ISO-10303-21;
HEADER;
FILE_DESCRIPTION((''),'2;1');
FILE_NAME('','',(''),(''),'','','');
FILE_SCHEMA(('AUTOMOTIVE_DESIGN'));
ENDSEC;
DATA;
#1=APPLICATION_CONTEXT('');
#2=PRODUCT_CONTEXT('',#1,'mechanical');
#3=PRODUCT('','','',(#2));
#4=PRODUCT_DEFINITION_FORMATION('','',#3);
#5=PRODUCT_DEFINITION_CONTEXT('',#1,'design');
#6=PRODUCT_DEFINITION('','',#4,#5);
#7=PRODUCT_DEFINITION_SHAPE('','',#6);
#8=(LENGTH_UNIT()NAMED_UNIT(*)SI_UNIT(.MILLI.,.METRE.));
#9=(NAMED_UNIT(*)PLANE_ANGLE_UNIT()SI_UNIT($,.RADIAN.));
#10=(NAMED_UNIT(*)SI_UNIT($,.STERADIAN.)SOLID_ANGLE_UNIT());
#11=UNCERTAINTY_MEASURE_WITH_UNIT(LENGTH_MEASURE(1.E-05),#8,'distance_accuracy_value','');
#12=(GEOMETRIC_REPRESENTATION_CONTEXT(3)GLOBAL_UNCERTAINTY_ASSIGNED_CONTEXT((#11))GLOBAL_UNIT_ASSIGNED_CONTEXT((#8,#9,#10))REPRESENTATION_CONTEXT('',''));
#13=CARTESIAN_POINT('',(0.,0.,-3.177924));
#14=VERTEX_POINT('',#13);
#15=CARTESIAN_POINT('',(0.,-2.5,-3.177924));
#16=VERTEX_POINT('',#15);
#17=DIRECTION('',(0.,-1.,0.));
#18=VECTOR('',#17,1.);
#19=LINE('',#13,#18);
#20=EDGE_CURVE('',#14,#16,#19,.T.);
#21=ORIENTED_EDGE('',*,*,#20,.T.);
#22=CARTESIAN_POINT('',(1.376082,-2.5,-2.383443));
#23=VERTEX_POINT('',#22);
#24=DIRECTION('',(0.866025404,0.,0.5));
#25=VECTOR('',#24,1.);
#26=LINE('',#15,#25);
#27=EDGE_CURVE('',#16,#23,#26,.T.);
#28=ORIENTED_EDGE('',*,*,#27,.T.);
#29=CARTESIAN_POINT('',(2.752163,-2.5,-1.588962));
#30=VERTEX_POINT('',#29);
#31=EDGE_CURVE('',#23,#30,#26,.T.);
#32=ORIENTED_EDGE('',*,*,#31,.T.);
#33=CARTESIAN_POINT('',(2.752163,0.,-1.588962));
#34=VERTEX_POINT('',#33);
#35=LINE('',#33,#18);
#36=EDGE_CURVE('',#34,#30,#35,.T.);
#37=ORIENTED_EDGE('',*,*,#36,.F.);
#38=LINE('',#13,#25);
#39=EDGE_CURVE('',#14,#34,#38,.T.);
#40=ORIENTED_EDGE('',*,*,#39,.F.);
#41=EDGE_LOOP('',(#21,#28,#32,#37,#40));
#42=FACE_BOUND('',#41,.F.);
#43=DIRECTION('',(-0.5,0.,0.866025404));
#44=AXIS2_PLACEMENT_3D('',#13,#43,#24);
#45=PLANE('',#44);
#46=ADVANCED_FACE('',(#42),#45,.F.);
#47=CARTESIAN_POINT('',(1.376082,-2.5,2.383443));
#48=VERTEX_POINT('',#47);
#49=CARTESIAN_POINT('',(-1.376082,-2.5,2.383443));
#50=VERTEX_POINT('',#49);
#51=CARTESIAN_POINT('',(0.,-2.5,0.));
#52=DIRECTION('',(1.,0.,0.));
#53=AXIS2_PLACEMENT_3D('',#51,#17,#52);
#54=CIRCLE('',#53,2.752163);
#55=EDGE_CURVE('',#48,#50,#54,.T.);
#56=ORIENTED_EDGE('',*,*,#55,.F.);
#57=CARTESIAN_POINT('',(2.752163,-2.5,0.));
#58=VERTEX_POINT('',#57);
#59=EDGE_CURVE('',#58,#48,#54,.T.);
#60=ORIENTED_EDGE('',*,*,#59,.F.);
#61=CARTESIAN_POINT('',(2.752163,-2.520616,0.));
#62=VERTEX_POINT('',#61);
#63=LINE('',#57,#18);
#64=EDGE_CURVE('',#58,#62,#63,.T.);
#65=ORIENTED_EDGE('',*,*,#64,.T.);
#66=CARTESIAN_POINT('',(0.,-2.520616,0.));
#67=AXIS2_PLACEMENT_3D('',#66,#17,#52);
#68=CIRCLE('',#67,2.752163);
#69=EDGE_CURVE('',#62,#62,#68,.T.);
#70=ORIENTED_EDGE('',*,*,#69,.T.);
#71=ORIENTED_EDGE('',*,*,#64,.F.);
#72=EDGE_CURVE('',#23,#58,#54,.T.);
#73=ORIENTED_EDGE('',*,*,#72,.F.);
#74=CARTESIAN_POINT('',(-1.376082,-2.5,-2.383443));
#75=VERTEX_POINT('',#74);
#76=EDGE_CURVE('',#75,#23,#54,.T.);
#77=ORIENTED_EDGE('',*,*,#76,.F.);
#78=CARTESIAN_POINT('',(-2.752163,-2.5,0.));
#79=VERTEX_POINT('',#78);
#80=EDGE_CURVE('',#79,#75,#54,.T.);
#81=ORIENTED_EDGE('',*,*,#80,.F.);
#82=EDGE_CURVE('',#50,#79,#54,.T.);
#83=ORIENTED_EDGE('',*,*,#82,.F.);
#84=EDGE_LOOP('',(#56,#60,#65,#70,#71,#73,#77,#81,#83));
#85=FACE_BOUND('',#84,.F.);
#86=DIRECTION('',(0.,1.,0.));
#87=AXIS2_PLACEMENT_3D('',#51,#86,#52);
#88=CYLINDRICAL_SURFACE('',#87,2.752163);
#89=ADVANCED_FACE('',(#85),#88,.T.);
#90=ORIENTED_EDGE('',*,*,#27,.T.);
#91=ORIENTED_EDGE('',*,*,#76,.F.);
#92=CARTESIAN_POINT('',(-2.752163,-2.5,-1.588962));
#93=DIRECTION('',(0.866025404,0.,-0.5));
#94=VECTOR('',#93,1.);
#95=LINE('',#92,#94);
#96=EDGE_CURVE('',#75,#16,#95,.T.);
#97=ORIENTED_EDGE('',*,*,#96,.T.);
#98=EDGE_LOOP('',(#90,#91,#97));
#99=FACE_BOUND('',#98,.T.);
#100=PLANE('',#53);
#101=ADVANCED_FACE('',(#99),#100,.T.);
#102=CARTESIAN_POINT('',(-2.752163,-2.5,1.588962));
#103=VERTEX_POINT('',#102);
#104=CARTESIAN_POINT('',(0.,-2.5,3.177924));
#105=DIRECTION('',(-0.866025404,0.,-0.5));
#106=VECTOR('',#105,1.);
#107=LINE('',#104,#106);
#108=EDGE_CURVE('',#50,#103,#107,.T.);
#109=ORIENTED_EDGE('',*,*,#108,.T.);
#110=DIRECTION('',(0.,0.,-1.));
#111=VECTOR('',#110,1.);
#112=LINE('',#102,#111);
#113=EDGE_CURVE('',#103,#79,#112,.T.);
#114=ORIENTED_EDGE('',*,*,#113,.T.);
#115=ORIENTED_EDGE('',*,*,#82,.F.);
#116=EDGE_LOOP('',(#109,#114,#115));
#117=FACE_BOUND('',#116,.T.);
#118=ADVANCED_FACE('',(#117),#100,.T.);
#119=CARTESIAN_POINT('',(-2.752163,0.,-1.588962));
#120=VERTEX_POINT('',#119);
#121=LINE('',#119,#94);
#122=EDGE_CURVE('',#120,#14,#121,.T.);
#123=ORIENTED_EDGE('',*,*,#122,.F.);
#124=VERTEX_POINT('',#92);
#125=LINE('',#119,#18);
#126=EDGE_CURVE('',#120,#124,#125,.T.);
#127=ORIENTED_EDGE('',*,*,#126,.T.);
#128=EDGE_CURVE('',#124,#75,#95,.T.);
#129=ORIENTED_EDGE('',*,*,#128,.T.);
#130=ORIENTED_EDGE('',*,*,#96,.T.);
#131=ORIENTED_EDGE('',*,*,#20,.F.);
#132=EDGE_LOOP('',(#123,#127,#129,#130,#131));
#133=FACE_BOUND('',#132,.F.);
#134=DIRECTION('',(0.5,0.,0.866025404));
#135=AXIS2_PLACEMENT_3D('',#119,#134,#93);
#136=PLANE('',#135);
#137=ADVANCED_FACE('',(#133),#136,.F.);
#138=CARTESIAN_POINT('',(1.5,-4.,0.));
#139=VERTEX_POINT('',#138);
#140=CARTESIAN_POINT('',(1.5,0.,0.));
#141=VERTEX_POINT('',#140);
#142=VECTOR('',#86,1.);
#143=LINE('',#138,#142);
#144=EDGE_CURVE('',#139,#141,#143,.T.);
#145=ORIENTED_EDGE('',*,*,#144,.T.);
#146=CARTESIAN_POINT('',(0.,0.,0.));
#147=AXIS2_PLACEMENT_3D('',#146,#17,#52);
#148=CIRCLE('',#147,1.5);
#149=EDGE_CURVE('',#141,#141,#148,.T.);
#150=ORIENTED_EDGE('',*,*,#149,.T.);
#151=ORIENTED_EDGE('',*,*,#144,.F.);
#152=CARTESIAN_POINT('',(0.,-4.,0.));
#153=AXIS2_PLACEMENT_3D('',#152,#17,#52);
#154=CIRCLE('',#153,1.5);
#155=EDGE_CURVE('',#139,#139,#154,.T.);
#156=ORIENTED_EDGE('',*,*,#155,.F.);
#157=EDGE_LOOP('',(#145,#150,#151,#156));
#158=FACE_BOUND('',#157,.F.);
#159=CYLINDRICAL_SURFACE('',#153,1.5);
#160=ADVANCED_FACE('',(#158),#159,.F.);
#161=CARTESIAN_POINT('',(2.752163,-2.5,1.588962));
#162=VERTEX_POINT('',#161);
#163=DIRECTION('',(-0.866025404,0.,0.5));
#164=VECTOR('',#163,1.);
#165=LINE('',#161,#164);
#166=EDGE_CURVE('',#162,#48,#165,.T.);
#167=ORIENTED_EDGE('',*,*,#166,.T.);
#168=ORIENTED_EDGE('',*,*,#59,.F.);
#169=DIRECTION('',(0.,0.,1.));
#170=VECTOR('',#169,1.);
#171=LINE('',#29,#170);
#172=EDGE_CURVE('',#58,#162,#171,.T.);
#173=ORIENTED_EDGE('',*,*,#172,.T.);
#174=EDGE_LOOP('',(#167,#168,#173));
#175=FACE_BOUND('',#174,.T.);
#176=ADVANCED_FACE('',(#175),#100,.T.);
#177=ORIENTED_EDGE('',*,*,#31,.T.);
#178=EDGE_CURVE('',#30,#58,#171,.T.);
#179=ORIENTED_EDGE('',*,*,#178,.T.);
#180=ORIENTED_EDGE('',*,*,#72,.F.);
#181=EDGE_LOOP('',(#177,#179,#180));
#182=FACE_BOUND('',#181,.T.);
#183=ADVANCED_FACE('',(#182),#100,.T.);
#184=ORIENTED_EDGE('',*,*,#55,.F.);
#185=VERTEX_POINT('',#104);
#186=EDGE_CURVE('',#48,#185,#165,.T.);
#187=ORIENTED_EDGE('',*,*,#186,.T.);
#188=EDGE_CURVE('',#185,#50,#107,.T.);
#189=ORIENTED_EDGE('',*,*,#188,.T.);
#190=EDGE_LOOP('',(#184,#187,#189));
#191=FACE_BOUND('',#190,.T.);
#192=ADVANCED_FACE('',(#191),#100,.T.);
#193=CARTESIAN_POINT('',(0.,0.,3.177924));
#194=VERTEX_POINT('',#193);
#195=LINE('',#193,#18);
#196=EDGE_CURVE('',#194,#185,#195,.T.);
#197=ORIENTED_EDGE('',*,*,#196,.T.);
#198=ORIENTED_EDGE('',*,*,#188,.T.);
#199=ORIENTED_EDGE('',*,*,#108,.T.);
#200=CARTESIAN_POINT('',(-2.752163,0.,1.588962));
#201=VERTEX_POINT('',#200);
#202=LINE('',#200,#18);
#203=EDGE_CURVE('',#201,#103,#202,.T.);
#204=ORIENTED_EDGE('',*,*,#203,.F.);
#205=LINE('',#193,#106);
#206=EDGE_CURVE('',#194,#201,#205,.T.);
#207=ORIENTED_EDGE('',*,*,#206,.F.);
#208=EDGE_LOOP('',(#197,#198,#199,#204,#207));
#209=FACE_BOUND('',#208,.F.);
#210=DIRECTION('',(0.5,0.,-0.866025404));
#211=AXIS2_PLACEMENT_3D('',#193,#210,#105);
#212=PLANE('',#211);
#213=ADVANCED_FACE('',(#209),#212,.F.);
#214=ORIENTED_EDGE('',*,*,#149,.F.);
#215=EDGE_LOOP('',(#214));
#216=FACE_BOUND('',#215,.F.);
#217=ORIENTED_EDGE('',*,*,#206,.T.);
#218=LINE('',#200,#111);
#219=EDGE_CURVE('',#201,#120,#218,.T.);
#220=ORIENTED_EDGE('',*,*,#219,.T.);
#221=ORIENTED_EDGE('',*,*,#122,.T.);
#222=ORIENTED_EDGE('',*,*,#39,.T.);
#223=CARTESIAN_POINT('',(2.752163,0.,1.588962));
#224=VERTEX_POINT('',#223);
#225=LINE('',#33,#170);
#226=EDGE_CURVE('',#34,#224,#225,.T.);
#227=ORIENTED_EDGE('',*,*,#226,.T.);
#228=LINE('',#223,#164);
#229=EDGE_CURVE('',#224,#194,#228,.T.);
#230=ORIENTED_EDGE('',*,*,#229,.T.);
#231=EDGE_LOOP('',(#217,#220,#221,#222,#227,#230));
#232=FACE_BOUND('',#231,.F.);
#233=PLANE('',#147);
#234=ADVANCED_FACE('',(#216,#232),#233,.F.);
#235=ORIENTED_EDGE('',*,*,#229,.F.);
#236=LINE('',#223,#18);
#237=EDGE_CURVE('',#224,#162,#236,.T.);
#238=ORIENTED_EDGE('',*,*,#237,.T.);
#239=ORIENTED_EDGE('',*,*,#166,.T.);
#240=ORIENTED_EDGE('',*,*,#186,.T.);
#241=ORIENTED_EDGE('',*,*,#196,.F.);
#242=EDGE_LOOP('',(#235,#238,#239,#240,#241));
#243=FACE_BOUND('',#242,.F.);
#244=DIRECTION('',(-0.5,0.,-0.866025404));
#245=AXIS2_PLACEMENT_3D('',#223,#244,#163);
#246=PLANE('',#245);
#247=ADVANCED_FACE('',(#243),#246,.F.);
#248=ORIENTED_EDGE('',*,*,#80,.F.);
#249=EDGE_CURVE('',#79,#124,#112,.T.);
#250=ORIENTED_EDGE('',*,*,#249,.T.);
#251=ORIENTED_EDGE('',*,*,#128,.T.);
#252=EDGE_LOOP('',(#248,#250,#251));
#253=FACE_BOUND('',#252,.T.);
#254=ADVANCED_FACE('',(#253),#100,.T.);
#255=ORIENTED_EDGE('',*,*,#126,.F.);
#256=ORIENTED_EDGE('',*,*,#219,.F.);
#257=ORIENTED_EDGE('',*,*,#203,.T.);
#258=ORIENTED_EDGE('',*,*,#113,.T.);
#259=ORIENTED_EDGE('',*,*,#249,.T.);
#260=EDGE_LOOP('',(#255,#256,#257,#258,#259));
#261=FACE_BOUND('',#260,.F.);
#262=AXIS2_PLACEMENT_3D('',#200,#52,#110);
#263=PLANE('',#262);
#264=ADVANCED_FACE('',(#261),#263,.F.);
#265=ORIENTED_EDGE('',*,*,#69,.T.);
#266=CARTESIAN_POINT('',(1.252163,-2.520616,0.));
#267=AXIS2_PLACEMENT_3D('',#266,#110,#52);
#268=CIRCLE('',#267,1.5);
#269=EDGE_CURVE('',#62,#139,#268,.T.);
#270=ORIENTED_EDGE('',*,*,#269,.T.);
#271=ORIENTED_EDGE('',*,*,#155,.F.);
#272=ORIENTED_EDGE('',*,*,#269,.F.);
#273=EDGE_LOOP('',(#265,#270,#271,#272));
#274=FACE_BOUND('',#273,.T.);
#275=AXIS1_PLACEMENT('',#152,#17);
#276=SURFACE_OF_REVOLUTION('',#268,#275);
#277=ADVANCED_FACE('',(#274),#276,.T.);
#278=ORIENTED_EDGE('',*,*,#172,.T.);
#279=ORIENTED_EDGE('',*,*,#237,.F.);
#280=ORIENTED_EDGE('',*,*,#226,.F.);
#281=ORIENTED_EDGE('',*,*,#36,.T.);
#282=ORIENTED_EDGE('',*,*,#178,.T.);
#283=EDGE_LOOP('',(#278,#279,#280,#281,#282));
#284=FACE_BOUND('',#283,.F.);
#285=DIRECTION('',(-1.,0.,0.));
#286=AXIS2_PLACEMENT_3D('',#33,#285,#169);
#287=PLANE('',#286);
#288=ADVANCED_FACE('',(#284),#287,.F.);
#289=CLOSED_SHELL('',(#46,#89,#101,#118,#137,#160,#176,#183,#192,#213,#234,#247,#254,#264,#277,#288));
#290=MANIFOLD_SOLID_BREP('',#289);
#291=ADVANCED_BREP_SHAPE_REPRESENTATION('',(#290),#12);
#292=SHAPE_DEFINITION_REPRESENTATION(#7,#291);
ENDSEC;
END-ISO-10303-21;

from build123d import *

# Parameters (mm, degrees)
F1_DEPTH = 2.5
F2_R     = 2.7521630024
F3_DEPTH = 1.5
F4_R     = 1.5
F5_DEPTH = 4


# Not quite as in the source:
# - a fillet or chamfer that OpenCascade refuses, or shapes differently, is made with other operations: its cross-section is extruded or revolved along the edge and cut away or added


with BuildPart() as f1:
    # F0 (on Front) → F1 (new body)
    with BuildSketch(Plane.XZ):
        Polygon((0, -3.1779241005), (2.7521630024, -1.5889620503), (2.7521630024, 1.5889620503), (0, 3.1779241005), (-2.7521630024, 1.5889620503), (-2.7521630024, -1.5889620503), align=None)
    extrude(amount=F1_DEPTH)

    # F2 (on face) → F3 (join)
    with BuildSketch(Plane.XZ.offset(2.5)):
        Circle(F2_R)
    extrude(amount=F3_DEPTH)

    # F4 (on face) → F5 (cut, through all)
    with BuildSketch(Plane.XZ.offset(4)):
        Circle(F4_R)
    extrude(amount=-F5_DEPTH, mode=Mode.SUBTRACT)

    # F6: fillet of radius 1.5 on 1 edges, made by hand

    # F6_s1 → F6_t2 (revolve, cut)
    with BuildSketch(Plane.XY):
        with BuildLine():
            ThreePointArc((2.7521630024, -2.5206160665), (2.3970986985, -3.4896992682), (1.5, -4))
            Line((1.5, -4), (2.7521630024, -4))
            Line((2.7521630024, -4), (2.7521630024, -2.5206160665))
        make_face()
    revolve(axis=Axis((0, -4, 0), (0, -1, 0)), mode=Mode.SUBTRACT)


solid = f1.part
